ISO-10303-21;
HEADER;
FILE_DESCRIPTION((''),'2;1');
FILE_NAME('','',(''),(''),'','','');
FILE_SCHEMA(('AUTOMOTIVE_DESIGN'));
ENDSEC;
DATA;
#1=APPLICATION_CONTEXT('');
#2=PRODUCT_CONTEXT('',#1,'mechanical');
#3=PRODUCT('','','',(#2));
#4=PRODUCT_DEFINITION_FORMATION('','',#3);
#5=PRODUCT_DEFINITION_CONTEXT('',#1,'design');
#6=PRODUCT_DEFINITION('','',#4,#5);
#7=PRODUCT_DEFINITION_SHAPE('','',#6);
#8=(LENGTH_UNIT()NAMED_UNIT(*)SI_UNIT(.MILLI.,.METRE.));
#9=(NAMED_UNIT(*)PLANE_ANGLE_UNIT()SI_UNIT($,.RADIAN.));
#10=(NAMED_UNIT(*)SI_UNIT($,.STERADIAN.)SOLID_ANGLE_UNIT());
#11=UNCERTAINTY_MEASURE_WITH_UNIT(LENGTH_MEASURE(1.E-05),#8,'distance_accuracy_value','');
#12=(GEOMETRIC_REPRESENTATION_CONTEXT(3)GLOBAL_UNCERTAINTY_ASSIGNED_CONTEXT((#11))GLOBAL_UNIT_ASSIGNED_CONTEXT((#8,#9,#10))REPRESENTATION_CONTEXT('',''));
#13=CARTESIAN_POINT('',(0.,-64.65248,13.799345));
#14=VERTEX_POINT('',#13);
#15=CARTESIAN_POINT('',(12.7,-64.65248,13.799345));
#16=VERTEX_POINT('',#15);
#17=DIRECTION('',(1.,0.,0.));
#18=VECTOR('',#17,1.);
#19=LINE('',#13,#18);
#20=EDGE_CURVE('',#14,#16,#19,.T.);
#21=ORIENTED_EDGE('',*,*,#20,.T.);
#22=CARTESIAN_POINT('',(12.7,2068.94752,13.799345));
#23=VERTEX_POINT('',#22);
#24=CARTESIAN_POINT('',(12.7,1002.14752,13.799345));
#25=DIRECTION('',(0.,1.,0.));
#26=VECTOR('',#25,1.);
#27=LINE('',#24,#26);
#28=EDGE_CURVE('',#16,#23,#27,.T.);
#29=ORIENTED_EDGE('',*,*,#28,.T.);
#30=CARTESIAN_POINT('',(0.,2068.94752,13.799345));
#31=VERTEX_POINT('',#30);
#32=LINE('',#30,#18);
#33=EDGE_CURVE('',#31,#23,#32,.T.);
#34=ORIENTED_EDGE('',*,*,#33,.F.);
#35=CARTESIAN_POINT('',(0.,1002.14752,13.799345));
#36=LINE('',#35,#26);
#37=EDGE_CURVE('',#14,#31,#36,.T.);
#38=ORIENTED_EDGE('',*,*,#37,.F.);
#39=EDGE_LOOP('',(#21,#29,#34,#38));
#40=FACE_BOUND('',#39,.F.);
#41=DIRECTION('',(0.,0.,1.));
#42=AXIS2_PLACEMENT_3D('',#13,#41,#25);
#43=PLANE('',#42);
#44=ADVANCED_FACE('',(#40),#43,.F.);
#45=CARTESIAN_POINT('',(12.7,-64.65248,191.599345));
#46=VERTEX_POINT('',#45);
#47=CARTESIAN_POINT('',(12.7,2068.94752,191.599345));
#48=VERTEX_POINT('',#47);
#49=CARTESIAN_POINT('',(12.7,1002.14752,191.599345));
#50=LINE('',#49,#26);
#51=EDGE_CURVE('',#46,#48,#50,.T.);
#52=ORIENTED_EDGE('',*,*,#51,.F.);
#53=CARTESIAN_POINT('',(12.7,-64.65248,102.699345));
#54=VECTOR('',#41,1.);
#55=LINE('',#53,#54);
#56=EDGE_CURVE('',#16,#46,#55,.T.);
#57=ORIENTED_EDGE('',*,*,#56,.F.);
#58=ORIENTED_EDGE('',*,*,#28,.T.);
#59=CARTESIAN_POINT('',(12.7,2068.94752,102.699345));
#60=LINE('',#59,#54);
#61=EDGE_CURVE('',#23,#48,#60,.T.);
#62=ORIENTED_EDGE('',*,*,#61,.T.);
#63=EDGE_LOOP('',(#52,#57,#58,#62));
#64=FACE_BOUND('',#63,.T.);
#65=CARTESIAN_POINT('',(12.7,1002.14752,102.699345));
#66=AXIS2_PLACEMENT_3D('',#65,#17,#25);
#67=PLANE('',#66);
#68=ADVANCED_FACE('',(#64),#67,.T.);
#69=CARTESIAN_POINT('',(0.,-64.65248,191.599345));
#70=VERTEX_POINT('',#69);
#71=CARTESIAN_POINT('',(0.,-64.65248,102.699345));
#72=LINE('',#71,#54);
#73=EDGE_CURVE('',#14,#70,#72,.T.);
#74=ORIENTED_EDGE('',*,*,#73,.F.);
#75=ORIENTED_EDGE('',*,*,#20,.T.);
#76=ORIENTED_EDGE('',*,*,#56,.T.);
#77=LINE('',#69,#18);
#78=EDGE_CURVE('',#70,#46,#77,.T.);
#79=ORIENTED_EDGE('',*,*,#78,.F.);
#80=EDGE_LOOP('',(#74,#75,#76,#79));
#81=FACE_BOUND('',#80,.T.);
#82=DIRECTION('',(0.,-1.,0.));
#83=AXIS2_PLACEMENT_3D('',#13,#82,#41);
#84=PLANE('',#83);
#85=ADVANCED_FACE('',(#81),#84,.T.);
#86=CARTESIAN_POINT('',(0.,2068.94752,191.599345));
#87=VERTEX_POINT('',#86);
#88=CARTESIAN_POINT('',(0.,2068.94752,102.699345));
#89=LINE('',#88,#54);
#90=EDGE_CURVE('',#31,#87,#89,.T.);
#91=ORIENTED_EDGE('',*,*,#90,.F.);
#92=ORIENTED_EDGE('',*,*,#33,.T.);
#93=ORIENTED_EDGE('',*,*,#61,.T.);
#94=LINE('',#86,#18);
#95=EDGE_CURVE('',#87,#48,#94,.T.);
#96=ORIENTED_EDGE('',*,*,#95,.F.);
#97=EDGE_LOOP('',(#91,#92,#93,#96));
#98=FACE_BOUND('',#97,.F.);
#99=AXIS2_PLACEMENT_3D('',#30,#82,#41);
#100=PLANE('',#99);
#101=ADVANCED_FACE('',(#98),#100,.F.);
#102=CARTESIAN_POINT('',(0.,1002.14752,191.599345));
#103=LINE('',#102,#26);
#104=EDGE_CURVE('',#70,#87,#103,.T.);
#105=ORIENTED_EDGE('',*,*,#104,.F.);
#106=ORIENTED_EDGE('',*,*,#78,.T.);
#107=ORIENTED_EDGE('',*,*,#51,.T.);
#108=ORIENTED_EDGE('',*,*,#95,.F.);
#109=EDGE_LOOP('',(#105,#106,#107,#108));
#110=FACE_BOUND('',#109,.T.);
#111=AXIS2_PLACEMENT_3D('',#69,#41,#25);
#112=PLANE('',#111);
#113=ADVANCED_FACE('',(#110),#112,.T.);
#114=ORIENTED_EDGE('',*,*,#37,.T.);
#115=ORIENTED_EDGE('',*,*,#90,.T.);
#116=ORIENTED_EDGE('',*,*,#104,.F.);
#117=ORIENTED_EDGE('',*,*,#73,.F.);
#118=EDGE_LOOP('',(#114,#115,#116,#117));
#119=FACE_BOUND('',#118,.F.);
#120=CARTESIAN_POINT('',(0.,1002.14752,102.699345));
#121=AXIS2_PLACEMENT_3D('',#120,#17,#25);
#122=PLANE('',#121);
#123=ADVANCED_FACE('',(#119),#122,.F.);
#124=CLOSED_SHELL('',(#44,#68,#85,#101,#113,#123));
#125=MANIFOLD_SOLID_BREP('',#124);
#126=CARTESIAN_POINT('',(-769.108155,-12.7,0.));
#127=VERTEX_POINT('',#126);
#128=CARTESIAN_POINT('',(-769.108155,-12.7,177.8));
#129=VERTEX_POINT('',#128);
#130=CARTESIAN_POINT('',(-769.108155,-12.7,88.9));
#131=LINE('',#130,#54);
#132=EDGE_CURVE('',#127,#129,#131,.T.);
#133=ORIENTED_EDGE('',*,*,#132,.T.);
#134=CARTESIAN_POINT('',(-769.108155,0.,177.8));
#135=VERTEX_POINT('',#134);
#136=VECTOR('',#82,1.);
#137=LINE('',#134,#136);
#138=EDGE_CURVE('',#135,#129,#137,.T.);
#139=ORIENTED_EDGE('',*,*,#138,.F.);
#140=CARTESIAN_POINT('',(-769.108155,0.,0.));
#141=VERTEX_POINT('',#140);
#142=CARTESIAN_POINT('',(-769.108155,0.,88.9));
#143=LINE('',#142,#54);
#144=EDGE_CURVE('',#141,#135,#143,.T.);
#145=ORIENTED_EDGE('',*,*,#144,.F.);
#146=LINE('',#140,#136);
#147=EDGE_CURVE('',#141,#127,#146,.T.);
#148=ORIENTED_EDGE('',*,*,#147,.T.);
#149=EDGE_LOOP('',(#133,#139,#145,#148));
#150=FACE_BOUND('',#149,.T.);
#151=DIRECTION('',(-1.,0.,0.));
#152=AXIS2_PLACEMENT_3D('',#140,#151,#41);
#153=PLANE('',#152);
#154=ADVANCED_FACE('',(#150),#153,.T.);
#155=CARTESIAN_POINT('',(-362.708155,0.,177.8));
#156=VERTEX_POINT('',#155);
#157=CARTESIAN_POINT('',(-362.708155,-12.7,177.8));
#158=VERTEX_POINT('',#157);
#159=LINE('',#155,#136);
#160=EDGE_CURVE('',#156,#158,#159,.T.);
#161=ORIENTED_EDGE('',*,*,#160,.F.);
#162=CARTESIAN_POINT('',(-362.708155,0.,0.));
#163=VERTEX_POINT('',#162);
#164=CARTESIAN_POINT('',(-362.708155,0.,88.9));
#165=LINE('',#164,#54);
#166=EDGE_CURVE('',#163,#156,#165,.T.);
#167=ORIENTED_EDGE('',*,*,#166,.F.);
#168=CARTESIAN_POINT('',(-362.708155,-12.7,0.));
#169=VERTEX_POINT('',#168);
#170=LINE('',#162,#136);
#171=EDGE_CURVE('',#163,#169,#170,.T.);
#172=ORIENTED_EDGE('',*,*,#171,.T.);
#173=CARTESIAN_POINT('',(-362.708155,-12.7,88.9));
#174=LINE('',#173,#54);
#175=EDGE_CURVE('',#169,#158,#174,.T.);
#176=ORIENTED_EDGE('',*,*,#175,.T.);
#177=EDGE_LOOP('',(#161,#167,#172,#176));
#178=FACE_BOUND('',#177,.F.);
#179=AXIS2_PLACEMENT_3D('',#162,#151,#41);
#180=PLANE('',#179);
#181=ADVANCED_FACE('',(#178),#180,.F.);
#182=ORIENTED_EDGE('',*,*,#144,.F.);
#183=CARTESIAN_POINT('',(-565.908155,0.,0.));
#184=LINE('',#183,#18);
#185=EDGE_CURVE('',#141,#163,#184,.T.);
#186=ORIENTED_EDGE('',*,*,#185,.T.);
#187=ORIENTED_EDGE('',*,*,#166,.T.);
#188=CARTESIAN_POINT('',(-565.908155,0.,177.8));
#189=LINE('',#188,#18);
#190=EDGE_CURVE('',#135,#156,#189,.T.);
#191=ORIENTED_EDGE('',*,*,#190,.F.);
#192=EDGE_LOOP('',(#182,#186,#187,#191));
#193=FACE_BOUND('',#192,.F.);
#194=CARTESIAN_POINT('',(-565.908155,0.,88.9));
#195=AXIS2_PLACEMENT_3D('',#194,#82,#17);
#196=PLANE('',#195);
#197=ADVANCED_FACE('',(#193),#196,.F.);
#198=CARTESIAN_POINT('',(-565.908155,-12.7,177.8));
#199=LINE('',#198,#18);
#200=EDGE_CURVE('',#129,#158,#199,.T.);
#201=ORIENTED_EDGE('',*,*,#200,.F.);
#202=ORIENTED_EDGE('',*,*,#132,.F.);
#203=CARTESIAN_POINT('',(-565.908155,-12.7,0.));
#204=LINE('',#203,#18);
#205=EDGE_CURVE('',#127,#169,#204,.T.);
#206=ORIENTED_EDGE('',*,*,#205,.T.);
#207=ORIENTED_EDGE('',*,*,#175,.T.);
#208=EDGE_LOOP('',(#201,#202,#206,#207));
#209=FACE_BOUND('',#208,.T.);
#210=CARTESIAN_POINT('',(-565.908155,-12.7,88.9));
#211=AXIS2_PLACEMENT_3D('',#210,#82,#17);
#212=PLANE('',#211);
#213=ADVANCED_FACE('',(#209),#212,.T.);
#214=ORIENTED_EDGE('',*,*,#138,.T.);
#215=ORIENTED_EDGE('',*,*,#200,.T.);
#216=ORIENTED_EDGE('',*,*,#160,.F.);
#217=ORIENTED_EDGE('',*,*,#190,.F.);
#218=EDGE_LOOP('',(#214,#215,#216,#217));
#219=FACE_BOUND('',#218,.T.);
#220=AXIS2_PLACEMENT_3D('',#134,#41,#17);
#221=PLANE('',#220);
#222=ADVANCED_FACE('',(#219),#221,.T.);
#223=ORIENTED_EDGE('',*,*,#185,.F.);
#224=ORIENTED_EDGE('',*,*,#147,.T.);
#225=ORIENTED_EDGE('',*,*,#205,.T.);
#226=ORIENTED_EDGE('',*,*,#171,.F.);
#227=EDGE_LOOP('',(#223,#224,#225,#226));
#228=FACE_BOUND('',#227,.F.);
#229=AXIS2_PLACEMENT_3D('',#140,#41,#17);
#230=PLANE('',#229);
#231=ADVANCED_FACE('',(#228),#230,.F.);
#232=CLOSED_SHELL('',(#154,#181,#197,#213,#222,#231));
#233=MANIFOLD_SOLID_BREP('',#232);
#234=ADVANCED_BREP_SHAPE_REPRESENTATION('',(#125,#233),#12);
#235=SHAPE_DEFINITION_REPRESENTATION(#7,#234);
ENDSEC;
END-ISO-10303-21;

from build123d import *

# Parameters (mm, degrees)
F1_W     = 2133.6
F1_H     = 177.8
F2_DEPTH = 12.7
F3_W     = 406.4
F3_H     = 177.8
F4_DEPTH = 12.7


# Not quite as in the source:
# - a variable given as a bare number and used for a length is read in inches; the dataset says mm whatever the document's units were


with BuildPart() as f2:
    # F1 (on Right) → F2 (new body)
    with BuildSketch(Plane.YZ):
        with Locations((1002.147519815, 102.6993451208)):
            Rectangle(F1_W, F1_H)
    extrude(amount=F2_DEPTH)


with BuildPart() as f4:
    # F3 (on Front) → F4 (new body)
    with BuildSketch(Plane.XZ):
        with Locations((-565.90815534, 88.9)):
            Rectangle(F3_W, F3_H)
    extrude(amount=F4_DEPTH)


solid = Compound([f2.part, f4.part])
